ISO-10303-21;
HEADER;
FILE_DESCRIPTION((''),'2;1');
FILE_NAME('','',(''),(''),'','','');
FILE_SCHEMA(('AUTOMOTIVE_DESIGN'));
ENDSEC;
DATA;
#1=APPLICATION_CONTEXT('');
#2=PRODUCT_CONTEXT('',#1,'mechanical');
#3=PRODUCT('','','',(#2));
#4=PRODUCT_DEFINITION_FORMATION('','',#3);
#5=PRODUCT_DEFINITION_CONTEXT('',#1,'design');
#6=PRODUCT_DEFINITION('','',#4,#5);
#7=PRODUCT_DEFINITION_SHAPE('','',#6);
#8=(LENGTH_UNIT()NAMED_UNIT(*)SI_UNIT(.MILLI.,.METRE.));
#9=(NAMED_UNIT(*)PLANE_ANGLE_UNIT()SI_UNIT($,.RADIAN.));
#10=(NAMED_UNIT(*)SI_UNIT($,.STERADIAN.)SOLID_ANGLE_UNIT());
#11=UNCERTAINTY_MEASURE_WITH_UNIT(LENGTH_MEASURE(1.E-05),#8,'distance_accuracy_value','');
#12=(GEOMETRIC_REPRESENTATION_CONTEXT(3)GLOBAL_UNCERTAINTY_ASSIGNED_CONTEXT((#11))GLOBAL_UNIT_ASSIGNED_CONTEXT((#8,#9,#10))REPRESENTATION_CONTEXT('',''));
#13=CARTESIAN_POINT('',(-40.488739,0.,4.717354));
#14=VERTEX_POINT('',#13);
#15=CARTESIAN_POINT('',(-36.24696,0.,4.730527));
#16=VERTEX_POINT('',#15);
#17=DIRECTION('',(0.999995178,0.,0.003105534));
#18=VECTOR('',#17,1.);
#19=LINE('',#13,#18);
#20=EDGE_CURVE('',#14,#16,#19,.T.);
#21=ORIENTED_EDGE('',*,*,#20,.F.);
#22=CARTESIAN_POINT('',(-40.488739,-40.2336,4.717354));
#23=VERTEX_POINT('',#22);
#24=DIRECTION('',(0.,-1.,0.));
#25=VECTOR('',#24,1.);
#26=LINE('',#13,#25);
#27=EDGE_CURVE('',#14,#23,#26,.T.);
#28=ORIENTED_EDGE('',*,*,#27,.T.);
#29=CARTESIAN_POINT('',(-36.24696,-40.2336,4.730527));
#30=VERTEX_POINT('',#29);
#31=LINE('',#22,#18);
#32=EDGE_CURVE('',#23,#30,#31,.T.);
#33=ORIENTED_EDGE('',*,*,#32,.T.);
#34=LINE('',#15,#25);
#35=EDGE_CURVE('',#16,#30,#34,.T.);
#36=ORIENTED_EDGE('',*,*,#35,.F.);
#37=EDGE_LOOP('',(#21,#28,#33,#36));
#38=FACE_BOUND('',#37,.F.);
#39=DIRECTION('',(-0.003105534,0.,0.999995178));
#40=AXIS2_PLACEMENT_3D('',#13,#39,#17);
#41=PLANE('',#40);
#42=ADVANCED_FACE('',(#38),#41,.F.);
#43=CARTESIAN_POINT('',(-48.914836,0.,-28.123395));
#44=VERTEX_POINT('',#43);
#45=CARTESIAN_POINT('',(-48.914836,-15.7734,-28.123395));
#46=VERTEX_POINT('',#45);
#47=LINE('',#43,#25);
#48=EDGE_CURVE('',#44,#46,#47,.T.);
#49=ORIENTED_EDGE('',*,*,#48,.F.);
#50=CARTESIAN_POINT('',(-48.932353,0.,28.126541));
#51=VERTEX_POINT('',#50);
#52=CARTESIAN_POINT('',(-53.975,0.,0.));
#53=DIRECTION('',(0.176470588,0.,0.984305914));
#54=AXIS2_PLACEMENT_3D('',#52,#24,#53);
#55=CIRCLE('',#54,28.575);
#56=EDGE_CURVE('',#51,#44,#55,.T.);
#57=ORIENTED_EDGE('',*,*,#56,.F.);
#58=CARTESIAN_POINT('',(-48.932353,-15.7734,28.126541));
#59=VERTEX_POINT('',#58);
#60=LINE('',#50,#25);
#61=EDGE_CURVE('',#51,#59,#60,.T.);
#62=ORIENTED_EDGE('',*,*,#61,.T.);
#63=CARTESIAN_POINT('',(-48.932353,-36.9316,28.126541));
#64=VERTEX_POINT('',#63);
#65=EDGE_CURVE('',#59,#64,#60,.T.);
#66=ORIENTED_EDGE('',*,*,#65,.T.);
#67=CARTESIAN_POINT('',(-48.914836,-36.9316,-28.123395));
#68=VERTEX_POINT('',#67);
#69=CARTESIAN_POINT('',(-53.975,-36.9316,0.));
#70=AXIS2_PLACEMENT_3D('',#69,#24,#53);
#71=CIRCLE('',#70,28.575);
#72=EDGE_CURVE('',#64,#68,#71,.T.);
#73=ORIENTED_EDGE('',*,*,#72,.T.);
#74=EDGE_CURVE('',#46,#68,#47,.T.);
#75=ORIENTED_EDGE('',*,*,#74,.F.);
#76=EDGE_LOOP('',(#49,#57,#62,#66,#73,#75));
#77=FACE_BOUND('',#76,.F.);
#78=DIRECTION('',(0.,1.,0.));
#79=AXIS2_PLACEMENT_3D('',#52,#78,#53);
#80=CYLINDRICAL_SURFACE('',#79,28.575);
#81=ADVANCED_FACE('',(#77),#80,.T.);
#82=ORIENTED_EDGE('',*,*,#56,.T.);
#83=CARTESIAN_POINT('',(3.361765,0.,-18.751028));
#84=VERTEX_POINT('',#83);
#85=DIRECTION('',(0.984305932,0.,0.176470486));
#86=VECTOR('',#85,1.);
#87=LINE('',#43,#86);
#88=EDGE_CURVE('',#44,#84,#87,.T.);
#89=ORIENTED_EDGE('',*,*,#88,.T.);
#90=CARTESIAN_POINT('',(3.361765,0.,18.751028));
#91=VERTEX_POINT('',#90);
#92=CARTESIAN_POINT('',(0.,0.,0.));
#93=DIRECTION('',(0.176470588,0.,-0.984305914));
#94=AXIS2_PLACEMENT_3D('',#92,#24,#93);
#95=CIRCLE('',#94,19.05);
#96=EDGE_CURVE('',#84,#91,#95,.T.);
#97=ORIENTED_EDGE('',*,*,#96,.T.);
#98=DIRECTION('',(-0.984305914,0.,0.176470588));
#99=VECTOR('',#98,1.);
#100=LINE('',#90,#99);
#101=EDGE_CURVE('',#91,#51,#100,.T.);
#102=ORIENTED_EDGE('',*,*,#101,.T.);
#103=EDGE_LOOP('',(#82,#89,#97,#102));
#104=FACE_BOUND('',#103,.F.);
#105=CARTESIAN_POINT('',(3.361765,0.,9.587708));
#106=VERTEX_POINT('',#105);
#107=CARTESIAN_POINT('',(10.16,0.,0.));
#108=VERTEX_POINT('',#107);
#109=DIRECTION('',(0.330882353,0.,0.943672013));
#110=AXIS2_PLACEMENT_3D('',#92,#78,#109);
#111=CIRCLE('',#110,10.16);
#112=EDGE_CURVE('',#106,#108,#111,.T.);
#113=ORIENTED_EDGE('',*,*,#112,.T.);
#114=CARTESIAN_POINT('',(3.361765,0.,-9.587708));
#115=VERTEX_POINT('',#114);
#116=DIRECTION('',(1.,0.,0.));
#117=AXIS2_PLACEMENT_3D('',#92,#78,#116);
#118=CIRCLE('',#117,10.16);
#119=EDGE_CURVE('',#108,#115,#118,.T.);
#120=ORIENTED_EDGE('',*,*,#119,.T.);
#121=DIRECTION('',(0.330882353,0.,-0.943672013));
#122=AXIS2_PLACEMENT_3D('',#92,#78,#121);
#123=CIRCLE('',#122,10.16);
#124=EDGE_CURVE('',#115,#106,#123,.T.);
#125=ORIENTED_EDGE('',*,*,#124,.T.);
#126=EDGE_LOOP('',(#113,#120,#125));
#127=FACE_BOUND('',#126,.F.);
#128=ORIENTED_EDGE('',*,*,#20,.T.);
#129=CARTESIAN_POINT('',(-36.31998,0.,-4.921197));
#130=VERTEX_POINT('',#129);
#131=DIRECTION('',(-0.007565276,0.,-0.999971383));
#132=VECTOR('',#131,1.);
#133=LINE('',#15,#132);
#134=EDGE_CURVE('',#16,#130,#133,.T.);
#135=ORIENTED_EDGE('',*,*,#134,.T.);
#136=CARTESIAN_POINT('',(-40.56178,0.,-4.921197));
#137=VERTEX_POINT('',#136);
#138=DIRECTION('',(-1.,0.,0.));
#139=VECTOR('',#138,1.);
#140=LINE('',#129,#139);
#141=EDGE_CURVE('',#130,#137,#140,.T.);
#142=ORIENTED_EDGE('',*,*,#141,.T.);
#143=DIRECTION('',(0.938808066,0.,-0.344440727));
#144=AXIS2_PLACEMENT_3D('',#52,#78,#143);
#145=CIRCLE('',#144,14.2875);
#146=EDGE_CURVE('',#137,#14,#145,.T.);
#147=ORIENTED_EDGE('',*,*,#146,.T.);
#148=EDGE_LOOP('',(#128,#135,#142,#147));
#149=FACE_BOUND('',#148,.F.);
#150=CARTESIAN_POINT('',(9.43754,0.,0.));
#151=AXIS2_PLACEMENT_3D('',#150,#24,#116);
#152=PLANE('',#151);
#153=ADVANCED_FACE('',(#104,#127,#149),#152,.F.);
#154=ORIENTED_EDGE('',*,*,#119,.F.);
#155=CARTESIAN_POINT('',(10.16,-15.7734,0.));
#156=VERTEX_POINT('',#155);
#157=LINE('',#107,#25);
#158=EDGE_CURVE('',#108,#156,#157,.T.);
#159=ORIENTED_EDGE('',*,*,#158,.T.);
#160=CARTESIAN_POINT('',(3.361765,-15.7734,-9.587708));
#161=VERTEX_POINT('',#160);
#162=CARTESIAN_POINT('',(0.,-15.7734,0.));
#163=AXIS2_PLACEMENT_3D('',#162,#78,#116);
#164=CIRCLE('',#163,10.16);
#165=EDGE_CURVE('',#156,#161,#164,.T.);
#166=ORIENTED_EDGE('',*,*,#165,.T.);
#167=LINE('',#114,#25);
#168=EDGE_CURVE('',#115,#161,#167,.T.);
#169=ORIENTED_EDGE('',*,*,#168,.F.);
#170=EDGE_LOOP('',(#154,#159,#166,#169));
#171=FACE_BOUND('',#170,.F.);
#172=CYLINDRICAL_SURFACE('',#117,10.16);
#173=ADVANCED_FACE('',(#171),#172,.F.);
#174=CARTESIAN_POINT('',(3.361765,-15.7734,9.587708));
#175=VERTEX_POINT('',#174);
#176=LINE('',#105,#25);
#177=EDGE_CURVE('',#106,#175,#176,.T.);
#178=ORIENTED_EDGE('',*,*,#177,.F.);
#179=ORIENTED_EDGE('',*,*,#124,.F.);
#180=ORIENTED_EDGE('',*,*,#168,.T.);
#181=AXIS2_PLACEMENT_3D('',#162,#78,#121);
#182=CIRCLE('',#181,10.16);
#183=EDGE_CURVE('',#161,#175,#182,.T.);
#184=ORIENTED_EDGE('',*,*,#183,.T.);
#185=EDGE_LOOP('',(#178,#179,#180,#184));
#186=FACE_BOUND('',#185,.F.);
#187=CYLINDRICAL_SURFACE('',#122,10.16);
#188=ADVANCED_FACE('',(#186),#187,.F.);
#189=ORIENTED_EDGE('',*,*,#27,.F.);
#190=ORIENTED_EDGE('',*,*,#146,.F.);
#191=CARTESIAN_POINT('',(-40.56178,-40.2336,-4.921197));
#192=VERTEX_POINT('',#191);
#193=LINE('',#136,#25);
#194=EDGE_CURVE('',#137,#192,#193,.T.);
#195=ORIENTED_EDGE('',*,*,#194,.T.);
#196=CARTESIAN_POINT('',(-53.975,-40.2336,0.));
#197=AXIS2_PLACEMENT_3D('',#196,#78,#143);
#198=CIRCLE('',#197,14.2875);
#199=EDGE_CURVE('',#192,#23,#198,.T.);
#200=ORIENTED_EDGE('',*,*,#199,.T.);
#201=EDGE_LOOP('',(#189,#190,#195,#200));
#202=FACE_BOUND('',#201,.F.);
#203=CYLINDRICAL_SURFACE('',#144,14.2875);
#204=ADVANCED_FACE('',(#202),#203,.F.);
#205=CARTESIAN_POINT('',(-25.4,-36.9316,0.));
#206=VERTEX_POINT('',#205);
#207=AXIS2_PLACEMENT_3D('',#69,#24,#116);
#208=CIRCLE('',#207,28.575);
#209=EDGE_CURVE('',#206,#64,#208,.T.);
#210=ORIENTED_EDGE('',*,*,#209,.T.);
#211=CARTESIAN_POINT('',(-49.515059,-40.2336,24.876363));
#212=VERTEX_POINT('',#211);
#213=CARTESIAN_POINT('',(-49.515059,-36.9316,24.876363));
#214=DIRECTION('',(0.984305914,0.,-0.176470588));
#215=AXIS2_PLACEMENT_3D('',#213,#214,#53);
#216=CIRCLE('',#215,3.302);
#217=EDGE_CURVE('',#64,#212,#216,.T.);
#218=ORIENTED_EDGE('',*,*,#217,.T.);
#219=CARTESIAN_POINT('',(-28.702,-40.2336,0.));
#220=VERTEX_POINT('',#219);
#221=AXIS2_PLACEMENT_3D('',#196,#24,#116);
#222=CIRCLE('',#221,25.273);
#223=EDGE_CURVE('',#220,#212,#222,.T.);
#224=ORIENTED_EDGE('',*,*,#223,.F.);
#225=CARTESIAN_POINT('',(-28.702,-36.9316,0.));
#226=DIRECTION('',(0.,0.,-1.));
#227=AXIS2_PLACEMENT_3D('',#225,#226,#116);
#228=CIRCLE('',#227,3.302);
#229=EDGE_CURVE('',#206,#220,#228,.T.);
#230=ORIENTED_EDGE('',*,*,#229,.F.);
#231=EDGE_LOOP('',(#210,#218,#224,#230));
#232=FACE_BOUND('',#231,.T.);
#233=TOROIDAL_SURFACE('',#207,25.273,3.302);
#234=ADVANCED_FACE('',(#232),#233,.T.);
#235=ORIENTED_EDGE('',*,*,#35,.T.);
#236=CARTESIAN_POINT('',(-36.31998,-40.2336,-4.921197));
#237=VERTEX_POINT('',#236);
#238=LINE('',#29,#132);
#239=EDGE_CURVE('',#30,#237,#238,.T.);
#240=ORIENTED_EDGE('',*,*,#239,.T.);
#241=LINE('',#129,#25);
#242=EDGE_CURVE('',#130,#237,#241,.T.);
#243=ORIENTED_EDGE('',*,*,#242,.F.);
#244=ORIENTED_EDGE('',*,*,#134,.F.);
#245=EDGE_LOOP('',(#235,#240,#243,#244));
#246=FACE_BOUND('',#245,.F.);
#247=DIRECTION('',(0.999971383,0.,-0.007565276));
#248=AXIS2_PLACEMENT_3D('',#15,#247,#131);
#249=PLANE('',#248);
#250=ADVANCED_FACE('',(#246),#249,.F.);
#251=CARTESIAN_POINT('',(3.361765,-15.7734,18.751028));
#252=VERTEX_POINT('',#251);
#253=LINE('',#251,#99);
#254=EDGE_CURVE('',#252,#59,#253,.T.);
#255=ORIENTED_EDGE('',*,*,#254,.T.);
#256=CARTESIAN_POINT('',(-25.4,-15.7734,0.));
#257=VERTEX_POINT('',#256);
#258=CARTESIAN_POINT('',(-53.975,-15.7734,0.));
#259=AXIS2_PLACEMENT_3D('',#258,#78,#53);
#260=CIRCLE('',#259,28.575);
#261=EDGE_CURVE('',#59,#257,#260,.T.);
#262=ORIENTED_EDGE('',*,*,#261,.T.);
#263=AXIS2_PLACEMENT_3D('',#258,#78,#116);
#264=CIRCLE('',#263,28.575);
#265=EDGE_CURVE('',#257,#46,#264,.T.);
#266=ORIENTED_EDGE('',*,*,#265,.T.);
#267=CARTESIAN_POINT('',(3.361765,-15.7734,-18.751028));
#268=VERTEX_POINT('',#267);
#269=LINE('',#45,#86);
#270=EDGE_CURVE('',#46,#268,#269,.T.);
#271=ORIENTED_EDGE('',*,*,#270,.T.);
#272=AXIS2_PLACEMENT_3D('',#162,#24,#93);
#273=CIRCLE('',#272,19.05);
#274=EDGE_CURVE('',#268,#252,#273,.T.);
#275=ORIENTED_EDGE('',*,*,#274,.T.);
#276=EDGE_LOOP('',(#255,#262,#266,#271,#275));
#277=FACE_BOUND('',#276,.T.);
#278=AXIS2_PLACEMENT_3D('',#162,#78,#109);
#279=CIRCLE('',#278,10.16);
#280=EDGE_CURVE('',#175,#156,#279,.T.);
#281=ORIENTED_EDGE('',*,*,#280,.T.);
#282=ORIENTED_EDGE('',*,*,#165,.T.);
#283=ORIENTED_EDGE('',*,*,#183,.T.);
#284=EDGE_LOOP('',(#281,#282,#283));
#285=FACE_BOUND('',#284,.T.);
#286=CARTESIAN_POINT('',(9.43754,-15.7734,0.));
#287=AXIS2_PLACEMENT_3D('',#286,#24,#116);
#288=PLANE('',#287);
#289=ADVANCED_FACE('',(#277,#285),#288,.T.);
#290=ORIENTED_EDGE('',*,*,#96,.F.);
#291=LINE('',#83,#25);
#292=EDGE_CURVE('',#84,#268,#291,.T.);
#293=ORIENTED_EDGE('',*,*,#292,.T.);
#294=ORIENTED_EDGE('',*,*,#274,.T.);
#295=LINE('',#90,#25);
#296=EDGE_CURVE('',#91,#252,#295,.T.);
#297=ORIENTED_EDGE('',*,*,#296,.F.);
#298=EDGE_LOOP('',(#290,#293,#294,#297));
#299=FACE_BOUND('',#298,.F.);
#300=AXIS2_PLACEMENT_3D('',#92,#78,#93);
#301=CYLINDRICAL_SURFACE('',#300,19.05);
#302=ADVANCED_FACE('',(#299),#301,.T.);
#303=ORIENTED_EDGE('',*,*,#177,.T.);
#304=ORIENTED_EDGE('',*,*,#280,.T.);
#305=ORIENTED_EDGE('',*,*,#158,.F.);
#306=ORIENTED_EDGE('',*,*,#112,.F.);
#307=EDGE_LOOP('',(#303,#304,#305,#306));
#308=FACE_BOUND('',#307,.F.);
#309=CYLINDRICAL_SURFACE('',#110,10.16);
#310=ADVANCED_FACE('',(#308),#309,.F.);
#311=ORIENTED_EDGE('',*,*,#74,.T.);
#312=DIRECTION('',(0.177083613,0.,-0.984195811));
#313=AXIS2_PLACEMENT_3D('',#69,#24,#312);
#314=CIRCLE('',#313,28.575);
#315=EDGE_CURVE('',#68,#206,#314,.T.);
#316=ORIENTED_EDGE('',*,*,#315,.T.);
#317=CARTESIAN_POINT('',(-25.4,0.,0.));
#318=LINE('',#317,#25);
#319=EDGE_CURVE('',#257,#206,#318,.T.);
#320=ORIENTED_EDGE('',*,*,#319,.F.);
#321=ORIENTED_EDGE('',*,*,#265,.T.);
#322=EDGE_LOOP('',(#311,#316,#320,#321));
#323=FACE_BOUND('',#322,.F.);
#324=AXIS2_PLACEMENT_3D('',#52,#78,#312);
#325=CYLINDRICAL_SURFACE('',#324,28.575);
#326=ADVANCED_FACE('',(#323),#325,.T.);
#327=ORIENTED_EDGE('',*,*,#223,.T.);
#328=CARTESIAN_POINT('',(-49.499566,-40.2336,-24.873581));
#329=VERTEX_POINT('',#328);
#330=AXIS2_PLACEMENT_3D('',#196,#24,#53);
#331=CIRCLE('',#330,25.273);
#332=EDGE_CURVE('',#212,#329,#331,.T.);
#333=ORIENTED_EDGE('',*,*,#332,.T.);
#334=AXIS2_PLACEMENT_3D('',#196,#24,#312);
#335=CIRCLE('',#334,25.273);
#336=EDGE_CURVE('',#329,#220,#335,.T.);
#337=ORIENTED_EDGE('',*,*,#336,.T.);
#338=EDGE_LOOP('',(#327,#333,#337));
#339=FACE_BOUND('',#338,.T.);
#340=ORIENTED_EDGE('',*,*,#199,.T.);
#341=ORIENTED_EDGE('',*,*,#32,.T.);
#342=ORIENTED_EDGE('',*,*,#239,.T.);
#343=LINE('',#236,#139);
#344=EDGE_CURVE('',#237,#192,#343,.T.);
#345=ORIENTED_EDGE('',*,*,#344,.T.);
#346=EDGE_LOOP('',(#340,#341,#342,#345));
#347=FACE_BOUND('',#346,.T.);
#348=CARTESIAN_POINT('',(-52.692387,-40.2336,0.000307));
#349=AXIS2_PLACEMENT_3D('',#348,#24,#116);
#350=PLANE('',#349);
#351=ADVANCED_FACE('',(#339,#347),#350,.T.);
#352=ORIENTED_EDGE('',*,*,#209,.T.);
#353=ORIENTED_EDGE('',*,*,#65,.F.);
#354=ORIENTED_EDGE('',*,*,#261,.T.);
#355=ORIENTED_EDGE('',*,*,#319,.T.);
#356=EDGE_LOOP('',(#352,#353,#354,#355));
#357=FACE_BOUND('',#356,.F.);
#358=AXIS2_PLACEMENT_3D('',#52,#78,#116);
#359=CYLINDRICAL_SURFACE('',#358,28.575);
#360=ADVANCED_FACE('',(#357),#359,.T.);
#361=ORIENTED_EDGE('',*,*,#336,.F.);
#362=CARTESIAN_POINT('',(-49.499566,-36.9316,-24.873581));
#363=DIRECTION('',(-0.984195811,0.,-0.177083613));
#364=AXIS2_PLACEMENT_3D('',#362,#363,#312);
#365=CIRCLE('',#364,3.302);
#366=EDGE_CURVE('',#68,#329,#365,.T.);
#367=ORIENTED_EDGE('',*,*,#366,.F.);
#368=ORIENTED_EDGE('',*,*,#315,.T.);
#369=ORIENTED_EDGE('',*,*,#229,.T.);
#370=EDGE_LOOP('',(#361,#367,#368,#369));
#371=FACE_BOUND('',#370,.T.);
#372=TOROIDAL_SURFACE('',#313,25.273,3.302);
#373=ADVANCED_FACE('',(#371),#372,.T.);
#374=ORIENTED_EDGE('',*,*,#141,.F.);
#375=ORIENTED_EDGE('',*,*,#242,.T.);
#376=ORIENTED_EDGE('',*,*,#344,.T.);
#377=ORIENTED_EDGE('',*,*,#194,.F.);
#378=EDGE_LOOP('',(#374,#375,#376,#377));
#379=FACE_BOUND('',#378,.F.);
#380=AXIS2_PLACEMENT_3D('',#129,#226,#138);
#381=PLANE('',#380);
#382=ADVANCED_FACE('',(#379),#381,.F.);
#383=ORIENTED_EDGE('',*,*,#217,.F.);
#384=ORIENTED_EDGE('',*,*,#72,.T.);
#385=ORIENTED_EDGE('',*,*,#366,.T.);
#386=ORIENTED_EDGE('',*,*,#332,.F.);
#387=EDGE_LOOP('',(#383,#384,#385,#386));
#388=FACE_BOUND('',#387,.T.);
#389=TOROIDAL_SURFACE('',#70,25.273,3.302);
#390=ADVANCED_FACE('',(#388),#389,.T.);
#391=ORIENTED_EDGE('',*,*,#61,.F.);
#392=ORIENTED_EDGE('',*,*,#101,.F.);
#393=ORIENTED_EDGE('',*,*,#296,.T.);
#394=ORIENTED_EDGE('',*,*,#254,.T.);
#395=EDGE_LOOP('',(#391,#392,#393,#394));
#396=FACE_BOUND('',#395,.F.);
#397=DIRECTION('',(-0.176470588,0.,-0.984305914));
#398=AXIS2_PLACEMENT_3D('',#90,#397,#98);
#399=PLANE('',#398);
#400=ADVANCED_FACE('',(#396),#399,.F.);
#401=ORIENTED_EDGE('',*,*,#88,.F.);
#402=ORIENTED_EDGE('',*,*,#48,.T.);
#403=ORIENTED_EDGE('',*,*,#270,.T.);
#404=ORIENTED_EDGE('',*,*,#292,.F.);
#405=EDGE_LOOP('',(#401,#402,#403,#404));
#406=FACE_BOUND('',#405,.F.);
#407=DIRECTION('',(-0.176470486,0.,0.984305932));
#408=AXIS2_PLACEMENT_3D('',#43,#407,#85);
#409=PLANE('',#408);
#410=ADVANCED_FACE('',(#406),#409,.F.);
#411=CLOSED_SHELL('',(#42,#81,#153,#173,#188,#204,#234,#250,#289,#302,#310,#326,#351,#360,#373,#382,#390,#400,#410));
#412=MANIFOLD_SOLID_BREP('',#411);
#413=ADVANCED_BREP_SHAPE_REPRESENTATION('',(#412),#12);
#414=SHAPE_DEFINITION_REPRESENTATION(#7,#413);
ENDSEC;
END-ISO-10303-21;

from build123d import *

# Parameters (mm, degrees)
F0_R     = 25.4
F1_DEPTH = 40.2336
F2_DEPTH = 15.7734
F3_R     = 3.302


with BuildPart() as f1:
    # F0 (on Front) → F1 (new body)
    with BuildSketch(Plane.XZ):
        with BuildLine():
            ThreePointArc((-48.9148357547, -28.1233952931), (-32.0532662831, -18.3294357754), (-25.4, 0))
            ThreePointArc((-25.4, 0), (-32.0589754437, 18.3362616868), (-48.9323529412, 28.1265414802))
            ThreePointArc((-48.9323529412, 28.1265414802), (-82.5499986144, -0.0088987403), (-48.9148357547, -28.1233952931))
        make_face()
        with Locations((-53.975, 0)):
            Circle(F0_R, mode=Mode.SUBTRACT)
        with Locations((-53.975, 0)):
            Circle(F0_R)
        with BuildLine():
            ThreePointArc((-40.5617797533, -4.9211968934), (-68.262089785, 0.1082669213), (-40.488739251, 4.717353841))
            Line((-40.488739251, 4.717353841), (-36.2469597058, 4.7305268942))
            Line((-36.2469597058, 4.7305268942), (-36.3199797533, -4.9211968934))
            Line((-36.3199797533, -4.9211968934), (-40.5617797533, -4.9211968934))
        make_face(mode=Mode.SUBTRACT)
    extrude(amount=F1_DEPTH)

    # F0 (on Front) → F2 (join)
    with BuildSketch(Plane.XZ):
        with BuildLine():
            ThreePointArc((3.3617647059, -18.7510276535), (19.05, 0), (3.3617647059, 18.7510276535))
            Line((3.3617647059, 18.7510276535), (3.3617647059, 9.5877076542))
            ThreePointArc((3.3617647059, 9.5877076542), (8.2879771178, 5.8766517077), (10.16, 0))
            ThreePointArc((10.16, 0), (8.2879771178, -5.8766517077), (3.3617647059, -9.5877076542))
            Line((3.3617647059, -9.5877076542), (3.3617647059, -18.7510276535))
        make_face()
        with BuildLine():
            ThreePointArc((-48.9323529412, 28.1265414802), (-32.0589754437, 18.3362616868), (-25.4, 0))
            ThreePointArc((-25.4, 0), (-32.0532662831, -18.3294357754), (-48.9148357547, -28.1233952931))
            Line((-48.9148357547, -28.1233952931), (3.3617647059, -18.7510276535))
            Line((3.3617647059, -18.7510276535), (3.3617647059, -9.5877076542))
            ThreePointArc((3.3617647059, -9.5877076542), (-10.16, 0), (3.3617647059, 9.5877076542))
            Line((3.3617647059, 9.5877076542), (3.3617647059, 18.7510276535))
            Line((3.3617647059, 18.7510276535), (-48.9323529412, 28.1265414802))
        make_face()
    extrude(amount=F2_DEPTH)

    # F3
    f3_edges = [f1.edges().sort_by_distance(p)[0] for p in [
        (-82.55, -40.2336, 0),
    ]]
    fillet(f3_edges, radius=F3_R)


solid = f1.part
